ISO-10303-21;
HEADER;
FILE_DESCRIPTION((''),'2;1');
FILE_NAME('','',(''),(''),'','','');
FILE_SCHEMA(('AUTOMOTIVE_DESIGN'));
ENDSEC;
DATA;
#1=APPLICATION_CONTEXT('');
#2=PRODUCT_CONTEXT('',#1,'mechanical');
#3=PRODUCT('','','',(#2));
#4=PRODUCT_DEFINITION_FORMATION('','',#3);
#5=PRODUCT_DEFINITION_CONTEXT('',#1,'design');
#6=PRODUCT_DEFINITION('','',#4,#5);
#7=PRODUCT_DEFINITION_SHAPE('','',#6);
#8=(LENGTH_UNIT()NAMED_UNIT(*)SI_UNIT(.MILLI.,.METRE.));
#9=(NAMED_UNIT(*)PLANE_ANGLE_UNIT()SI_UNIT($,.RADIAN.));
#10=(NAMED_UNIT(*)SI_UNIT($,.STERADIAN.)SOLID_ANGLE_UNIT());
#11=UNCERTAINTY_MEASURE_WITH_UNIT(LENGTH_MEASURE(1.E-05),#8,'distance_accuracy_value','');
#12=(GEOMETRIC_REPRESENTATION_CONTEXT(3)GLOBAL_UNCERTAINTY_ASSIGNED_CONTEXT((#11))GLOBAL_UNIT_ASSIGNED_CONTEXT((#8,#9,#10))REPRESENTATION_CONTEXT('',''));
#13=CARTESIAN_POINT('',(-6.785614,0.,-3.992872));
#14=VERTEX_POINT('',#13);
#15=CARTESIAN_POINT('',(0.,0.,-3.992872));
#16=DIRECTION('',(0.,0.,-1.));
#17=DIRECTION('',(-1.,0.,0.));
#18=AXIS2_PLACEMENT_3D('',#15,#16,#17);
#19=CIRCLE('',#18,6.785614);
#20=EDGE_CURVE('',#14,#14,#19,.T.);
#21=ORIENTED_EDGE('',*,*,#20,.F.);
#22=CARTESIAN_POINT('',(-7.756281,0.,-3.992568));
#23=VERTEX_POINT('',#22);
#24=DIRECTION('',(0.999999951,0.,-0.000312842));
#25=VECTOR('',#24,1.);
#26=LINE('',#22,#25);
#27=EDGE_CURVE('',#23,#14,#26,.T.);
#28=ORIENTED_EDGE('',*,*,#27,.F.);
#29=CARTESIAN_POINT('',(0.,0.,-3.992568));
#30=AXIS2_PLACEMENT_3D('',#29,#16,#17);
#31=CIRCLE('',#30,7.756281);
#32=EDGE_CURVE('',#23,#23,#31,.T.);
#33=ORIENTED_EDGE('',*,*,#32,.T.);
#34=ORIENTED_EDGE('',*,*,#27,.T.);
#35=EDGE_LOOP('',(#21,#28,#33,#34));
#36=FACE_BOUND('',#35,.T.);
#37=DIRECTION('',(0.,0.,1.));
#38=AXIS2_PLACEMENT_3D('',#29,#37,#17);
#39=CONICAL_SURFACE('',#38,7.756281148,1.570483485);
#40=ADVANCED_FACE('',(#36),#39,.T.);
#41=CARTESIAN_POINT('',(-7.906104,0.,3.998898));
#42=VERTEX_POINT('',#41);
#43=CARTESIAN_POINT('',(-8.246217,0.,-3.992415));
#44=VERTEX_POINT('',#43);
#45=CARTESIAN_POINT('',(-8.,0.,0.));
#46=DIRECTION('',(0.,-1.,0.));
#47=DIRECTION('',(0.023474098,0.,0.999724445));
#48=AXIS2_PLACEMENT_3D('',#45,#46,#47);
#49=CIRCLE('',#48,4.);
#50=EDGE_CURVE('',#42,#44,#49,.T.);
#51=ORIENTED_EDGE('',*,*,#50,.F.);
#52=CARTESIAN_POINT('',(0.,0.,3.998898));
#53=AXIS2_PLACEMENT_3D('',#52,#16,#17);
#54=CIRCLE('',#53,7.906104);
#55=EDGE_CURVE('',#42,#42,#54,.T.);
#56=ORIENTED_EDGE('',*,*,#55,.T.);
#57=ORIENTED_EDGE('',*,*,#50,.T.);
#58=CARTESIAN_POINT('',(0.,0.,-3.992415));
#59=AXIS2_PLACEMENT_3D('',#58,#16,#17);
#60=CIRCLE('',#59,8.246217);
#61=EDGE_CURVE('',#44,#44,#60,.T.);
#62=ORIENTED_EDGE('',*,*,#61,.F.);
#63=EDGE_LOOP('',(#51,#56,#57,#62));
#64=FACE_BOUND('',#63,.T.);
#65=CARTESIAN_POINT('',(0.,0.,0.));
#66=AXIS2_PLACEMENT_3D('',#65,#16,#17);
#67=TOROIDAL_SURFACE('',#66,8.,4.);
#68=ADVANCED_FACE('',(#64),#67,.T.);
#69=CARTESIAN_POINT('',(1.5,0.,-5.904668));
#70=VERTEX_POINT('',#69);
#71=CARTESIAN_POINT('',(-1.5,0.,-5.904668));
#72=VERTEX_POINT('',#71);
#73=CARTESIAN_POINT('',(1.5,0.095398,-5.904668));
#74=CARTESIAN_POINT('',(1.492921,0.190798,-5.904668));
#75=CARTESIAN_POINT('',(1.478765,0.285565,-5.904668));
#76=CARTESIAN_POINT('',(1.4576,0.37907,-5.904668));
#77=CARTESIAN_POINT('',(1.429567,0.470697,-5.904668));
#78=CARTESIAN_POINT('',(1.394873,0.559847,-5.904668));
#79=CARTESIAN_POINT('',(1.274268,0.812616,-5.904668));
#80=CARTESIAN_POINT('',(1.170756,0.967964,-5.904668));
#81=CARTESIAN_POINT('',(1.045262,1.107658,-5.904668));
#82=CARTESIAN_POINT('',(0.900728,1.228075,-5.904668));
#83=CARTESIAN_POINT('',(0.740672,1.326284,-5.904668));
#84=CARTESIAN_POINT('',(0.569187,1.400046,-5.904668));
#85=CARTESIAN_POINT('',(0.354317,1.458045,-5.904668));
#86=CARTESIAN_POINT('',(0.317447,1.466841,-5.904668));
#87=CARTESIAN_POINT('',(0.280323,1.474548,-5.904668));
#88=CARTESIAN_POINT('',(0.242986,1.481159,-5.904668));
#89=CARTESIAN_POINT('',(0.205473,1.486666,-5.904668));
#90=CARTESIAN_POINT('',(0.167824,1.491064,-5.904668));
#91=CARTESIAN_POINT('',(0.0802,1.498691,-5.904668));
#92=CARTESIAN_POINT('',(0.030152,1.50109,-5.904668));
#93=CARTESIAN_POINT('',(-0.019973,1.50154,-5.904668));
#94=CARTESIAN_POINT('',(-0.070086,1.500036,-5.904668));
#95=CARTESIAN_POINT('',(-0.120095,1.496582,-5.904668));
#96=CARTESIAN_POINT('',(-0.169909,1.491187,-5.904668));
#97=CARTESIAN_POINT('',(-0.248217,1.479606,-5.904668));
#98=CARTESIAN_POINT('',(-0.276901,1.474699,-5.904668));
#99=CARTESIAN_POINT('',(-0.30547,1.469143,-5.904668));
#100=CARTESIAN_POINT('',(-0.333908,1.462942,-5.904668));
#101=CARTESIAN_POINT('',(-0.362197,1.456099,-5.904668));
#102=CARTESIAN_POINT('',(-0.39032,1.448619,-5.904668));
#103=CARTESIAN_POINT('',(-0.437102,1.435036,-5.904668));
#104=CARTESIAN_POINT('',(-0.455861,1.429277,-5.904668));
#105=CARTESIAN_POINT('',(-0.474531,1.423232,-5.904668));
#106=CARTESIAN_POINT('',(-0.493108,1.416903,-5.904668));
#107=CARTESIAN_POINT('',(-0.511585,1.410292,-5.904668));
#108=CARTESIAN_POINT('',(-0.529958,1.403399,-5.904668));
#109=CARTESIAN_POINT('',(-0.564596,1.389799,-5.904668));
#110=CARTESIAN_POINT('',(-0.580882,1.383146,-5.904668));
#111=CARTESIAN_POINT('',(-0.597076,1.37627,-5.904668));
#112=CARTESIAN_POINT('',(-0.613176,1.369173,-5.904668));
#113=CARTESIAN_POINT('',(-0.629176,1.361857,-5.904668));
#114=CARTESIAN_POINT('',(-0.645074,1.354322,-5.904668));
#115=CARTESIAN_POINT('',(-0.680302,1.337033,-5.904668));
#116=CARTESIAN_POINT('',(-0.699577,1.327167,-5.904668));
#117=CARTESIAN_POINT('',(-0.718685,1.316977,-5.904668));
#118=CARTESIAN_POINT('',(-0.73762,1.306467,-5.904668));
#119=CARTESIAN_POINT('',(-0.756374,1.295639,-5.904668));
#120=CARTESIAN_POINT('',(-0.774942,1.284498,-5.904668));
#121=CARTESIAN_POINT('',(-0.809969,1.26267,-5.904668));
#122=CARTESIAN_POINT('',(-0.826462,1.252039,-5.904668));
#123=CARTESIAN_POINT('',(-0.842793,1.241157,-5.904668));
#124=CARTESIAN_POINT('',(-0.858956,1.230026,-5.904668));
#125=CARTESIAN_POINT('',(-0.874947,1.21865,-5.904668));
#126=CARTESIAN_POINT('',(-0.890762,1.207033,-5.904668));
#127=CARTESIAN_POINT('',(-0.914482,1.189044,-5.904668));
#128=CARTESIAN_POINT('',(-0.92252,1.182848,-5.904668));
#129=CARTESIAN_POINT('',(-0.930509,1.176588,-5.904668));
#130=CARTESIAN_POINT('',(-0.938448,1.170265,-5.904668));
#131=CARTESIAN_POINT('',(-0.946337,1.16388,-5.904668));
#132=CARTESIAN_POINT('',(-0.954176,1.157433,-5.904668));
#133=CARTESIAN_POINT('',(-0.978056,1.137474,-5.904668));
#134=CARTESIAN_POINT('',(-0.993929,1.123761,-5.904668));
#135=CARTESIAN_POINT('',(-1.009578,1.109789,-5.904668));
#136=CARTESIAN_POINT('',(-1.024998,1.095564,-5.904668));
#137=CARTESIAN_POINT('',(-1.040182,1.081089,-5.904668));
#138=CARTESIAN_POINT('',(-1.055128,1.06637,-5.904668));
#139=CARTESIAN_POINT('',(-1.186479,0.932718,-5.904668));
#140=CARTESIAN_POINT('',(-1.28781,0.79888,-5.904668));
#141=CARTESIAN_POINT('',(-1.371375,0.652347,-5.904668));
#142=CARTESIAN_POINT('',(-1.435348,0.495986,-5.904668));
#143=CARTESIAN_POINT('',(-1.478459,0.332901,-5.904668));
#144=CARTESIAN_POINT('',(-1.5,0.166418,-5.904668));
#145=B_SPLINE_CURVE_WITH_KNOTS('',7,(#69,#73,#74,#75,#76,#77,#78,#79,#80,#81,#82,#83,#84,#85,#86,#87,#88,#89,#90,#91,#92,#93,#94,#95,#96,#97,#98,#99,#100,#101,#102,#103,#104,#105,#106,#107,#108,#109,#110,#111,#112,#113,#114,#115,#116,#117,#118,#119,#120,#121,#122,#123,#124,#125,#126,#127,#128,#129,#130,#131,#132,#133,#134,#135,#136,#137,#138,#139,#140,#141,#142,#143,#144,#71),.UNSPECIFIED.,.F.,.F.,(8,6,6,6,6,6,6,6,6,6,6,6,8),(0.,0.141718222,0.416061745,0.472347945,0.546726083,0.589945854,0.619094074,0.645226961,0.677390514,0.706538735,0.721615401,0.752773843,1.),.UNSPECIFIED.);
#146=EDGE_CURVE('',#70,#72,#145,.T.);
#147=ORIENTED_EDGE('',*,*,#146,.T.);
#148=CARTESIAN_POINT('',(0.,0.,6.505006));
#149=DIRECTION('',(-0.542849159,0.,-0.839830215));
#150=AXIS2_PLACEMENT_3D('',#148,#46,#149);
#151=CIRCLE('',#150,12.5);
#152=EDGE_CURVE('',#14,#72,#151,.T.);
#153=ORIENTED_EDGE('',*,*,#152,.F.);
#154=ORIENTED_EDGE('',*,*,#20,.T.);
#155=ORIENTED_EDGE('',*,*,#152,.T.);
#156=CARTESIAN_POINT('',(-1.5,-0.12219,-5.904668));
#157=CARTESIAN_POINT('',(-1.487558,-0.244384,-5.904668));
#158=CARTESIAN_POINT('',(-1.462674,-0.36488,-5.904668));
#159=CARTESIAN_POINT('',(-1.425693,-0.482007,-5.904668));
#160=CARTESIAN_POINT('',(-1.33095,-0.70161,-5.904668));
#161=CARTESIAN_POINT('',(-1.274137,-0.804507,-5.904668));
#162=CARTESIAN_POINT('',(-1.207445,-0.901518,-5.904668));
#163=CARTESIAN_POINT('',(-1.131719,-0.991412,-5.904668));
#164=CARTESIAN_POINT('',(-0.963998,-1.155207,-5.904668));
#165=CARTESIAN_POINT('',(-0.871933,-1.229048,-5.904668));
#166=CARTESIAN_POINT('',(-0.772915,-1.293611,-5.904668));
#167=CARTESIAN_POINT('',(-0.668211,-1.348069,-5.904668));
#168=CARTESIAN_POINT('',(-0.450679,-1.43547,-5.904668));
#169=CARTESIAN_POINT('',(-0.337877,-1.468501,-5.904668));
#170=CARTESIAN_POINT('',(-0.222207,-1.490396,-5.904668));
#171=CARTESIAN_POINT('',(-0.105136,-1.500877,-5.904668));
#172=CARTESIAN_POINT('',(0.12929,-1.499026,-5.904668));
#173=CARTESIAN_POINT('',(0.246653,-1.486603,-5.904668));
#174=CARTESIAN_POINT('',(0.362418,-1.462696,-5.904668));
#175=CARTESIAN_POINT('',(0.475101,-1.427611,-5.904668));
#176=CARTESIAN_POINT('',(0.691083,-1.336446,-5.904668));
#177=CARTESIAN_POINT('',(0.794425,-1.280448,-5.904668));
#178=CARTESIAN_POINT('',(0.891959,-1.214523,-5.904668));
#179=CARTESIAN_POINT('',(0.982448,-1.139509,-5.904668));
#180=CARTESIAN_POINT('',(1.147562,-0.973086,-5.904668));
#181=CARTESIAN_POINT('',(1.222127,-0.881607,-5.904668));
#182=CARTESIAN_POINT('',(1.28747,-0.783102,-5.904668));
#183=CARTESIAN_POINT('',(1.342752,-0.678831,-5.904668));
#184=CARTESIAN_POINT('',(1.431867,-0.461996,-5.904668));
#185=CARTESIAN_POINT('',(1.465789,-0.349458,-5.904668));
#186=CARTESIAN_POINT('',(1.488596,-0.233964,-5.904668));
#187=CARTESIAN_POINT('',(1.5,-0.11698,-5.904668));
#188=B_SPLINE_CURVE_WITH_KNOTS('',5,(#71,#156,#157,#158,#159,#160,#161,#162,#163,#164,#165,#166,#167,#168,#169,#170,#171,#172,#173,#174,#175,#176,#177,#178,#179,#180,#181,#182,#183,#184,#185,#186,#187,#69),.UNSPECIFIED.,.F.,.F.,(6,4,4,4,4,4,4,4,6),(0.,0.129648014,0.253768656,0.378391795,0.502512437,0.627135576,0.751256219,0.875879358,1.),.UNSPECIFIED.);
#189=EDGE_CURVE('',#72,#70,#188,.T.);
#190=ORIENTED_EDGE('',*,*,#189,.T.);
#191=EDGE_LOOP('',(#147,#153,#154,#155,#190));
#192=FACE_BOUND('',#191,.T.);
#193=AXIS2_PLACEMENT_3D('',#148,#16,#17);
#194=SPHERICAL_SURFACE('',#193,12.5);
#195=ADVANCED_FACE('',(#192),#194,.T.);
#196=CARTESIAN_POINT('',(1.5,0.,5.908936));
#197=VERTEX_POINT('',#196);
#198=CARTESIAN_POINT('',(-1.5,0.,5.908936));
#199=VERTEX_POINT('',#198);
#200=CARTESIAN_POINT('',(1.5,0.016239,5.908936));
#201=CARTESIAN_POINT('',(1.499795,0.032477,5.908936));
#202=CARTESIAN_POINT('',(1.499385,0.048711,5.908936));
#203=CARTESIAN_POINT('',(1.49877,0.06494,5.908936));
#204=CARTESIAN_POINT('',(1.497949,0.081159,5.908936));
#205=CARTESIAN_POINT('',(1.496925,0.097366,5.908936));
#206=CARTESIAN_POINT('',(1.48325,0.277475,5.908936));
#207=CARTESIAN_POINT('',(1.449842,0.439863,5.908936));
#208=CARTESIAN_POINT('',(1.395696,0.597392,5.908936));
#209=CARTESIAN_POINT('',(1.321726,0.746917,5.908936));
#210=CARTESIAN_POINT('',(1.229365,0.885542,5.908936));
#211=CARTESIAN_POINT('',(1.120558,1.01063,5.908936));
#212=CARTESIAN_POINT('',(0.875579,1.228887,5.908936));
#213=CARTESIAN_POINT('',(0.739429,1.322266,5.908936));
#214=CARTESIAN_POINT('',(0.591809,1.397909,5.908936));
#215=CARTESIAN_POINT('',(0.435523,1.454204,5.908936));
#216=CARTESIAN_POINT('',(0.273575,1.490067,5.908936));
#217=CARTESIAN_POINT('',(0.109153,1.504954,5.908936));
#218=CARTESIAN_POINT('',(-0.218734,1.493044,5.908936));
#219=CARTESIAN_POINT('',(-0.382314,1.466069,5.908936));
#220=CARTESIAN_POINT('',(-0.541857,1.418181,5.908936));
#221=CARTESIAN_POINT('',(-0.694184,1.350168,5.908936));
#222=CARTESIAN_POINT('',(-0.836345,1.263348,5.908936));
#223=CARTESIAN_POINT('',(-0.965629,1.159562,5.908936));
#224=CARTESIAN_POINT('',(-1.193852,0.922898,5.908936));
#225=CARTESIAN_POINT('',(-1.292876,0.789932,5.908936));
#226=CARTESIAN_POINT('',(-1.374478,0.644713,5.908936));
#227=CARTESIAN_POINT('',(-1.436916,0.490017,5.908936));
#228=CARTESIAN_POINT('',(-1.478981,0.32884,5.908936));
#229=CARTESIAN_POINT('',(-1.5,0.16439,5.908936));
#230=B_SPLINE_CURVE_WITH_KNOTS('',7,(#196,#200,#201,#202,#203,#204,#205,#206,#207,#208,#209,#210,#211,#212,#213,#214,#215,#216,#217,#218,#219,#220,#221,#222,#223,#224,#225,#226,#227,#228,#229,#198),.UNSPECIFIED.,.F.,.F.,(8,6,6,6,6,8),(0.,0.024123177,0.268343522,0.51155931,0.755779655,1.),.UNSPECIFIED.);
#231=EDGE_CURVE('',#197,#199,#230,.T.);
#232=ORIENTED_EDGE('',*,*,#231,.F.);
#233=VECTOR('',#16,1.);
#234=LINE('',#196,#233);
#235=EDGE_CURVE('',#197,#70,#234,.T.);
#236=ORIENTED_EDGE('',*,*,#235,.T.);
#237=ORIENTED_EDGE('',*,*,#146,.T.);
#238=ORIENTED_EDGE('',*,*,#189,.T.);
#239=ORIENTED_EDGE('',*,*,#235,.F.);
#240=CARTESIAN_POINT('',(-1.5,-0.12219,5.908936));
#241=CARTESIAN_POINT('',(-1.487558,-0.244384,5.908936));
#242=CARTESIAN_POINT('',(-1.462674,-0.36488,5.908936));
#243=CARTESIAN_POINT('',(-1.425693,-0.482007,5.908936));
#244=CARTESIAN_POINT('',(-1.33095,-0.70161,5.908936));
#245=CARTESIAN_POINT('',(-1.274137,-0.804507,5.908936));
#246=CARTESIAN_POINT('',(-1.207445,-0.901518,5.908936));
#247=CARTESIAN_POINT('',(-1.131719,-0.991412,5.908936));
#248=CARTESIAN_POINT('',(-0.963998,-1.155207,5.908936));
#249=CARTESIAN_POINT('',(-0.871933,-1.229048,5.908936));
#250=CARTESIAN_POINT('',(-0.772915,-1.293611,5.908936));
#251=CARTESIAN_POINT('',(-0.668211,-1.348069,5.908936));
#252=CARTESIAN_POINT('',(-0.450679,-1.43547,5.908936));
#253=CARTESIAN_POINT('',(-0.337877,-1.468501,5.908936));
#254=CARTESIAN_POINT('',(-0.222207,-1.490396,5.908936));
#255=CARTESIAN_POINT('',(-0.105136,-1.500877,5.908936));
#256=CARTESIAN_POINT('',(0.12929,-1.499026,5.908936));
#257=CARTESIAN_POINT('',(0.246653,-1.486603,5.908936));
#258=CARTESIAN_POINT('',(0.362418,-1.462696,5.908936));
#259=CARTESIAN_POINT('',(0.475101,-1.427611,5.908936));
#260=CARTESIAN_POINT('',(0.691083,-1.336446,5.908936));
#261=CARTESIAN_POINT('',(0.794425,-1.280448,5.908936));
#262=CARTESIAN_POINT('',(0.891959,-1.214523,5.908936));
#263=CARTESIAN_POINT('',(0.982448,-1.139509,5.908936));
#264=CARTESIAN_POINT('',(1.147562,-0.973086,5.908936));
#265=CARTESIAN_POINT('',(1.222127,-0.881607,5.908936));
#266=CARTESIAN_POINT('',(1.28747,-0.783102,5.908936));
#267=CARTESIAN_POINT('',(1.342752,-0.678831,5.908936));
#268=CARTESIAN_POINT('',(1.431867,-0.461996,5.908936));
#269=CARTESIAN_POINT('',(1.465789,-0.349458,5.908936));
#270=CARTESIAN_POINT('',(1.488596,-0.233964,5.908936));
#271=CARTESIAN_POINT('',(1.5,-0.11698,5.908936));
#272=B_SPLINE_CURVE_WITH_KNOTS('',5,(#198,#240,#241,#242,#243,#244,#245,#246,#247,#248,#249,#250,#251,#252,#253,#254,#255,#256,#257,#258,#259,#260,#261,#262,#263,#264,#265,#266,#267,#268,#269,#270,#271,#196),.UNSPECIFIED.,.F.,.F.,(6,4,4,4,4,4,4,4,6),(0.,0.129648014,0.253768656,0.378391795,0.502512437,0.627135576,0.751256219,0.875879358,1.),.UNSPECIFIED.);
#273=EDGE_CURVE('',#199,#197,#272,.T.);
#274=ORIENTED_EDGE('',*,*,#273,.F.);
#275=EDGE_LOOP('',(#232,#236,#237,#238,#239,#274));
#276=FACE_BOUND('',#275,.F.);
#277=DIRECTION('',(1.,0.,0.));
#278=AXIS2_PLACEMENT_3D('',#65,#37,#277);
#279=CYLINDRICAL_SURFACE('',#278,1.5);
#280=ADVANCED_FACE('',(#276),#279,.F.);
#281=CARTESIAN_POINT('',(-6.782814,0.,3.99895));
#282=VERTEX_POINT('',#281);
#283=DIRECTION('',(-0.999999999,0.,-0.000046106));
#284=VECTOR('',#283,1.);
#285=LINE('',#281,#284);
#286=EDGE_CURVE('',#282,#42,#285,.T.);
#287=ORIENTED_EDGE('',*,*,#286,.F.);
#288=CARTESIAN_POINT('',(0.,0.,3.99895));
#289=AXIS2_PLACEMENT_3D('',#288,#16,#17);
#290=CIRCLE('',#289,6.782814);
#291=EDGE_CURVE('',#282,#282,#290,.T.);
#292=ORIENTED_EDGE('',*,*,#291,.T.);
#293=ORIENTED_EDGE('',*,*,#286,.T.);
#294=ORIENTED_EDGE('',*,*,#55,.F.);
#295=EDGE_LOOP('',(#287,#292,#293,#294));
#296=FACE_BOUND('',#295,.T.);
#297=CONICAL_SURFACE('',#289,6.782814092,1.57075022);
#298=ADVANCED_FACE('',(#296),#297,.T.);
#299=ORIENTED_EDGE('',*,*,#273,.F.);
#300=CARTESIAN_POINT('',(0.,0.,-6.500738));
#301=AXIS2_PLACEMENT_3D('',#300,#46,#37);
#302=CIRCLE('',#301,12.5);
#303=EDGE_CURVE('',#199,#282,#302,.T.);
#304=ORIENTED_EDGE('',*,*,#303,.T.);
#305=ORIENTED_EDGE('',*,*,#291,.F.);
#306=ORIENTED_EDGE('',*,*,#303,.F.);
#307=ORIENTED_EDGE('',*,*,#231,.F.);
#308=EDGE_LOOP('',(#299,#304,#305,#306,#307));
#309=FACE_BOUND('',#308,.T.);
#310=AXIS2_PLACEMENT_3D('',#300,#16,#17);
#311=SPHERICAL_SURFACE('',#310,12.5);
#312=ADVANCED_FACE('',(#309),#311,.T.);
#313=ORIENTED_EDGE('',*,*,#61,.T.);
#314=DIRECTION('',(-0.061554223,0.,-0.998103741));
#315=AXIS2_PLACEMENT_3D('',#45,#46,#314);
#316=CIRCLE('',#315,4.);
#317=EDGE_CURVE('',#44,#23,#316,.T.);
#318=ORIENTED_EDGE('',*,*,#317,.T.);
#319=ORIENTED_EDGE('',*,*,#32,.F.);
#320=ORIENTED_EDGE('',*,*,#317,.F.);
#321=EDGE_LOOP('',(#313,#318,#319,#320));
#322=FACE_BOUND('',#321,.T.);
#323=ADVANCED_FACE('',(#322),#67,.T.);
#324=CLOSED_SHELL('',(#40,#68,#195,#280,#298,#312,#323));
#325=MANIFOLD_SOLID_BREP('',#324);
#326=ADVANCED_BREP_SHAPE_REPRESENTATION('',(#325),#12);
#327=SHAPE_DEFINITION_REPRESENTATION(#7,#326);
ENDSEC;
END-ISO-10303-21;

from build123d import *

# Parameters (mm, degrees)
F2_R          = 1.5
F3_DEPTH      = 5.995994212
F3_DEPTH_BACK = 6.0002622918


with BuildPart() as f1:
    # F0 (on Front) → F1 (revolve)
    with BuildSketch(Plane.XZ):
        with BuildLine():
            Line((-7.756281148, -3.9925682363), (-6.7856144907, -3.9928719014))
            ThreePointArc((-6.7856144907, -3.9928719014), (-3.5374092838, -5.4840198421), (0, -5.994994212))
            Line((0, -5.994994212), (0, 5.9992622918))
            ThreePointArc((0, 5.9992622918), (-3.5358103027, 5.4887595917), (-6.7828140924, 3.9989495724))
            Line((-6.7828140924, 3.9989495724), (-7.9061036088, 3.9988977816))
            ThreePointArc((-7.9061036088, 3.9988977816), (-11.9963821429, 0.1700875292), (-8.2462168891, -3.9924149638))
            Line((-8.2462168891, -3.9924149638), (-7.756281148, -3.9925682363))
        make_face()
        with BuildLine():
            ThreePointArc((-8.2462168891, -3.9924149638), (-8.0012513674, -3.9999998043), (-7.756281148, -3.9925682363))
            Line((-7.756281148, -3.9925682363), (-8.2462168891, -3.9924149638))
        make_face()
    revolve(axis=Axis((0, 0, 0.0021340399), (0, 0, -1)))

    # F2 (on Top) → F3 (cut, two sides)
    with BuildSketch(Plane.XY) as f3_sk:
        Circle(F2_R)
    extrude(amount=-F3_DEPTH, mode=Mode.SUBTRACT)
    extrude(f3_sk.sketch, amount=F3_DEPTH_BACK, mode=Mode.SUBTRACT)


solid = f1.part
